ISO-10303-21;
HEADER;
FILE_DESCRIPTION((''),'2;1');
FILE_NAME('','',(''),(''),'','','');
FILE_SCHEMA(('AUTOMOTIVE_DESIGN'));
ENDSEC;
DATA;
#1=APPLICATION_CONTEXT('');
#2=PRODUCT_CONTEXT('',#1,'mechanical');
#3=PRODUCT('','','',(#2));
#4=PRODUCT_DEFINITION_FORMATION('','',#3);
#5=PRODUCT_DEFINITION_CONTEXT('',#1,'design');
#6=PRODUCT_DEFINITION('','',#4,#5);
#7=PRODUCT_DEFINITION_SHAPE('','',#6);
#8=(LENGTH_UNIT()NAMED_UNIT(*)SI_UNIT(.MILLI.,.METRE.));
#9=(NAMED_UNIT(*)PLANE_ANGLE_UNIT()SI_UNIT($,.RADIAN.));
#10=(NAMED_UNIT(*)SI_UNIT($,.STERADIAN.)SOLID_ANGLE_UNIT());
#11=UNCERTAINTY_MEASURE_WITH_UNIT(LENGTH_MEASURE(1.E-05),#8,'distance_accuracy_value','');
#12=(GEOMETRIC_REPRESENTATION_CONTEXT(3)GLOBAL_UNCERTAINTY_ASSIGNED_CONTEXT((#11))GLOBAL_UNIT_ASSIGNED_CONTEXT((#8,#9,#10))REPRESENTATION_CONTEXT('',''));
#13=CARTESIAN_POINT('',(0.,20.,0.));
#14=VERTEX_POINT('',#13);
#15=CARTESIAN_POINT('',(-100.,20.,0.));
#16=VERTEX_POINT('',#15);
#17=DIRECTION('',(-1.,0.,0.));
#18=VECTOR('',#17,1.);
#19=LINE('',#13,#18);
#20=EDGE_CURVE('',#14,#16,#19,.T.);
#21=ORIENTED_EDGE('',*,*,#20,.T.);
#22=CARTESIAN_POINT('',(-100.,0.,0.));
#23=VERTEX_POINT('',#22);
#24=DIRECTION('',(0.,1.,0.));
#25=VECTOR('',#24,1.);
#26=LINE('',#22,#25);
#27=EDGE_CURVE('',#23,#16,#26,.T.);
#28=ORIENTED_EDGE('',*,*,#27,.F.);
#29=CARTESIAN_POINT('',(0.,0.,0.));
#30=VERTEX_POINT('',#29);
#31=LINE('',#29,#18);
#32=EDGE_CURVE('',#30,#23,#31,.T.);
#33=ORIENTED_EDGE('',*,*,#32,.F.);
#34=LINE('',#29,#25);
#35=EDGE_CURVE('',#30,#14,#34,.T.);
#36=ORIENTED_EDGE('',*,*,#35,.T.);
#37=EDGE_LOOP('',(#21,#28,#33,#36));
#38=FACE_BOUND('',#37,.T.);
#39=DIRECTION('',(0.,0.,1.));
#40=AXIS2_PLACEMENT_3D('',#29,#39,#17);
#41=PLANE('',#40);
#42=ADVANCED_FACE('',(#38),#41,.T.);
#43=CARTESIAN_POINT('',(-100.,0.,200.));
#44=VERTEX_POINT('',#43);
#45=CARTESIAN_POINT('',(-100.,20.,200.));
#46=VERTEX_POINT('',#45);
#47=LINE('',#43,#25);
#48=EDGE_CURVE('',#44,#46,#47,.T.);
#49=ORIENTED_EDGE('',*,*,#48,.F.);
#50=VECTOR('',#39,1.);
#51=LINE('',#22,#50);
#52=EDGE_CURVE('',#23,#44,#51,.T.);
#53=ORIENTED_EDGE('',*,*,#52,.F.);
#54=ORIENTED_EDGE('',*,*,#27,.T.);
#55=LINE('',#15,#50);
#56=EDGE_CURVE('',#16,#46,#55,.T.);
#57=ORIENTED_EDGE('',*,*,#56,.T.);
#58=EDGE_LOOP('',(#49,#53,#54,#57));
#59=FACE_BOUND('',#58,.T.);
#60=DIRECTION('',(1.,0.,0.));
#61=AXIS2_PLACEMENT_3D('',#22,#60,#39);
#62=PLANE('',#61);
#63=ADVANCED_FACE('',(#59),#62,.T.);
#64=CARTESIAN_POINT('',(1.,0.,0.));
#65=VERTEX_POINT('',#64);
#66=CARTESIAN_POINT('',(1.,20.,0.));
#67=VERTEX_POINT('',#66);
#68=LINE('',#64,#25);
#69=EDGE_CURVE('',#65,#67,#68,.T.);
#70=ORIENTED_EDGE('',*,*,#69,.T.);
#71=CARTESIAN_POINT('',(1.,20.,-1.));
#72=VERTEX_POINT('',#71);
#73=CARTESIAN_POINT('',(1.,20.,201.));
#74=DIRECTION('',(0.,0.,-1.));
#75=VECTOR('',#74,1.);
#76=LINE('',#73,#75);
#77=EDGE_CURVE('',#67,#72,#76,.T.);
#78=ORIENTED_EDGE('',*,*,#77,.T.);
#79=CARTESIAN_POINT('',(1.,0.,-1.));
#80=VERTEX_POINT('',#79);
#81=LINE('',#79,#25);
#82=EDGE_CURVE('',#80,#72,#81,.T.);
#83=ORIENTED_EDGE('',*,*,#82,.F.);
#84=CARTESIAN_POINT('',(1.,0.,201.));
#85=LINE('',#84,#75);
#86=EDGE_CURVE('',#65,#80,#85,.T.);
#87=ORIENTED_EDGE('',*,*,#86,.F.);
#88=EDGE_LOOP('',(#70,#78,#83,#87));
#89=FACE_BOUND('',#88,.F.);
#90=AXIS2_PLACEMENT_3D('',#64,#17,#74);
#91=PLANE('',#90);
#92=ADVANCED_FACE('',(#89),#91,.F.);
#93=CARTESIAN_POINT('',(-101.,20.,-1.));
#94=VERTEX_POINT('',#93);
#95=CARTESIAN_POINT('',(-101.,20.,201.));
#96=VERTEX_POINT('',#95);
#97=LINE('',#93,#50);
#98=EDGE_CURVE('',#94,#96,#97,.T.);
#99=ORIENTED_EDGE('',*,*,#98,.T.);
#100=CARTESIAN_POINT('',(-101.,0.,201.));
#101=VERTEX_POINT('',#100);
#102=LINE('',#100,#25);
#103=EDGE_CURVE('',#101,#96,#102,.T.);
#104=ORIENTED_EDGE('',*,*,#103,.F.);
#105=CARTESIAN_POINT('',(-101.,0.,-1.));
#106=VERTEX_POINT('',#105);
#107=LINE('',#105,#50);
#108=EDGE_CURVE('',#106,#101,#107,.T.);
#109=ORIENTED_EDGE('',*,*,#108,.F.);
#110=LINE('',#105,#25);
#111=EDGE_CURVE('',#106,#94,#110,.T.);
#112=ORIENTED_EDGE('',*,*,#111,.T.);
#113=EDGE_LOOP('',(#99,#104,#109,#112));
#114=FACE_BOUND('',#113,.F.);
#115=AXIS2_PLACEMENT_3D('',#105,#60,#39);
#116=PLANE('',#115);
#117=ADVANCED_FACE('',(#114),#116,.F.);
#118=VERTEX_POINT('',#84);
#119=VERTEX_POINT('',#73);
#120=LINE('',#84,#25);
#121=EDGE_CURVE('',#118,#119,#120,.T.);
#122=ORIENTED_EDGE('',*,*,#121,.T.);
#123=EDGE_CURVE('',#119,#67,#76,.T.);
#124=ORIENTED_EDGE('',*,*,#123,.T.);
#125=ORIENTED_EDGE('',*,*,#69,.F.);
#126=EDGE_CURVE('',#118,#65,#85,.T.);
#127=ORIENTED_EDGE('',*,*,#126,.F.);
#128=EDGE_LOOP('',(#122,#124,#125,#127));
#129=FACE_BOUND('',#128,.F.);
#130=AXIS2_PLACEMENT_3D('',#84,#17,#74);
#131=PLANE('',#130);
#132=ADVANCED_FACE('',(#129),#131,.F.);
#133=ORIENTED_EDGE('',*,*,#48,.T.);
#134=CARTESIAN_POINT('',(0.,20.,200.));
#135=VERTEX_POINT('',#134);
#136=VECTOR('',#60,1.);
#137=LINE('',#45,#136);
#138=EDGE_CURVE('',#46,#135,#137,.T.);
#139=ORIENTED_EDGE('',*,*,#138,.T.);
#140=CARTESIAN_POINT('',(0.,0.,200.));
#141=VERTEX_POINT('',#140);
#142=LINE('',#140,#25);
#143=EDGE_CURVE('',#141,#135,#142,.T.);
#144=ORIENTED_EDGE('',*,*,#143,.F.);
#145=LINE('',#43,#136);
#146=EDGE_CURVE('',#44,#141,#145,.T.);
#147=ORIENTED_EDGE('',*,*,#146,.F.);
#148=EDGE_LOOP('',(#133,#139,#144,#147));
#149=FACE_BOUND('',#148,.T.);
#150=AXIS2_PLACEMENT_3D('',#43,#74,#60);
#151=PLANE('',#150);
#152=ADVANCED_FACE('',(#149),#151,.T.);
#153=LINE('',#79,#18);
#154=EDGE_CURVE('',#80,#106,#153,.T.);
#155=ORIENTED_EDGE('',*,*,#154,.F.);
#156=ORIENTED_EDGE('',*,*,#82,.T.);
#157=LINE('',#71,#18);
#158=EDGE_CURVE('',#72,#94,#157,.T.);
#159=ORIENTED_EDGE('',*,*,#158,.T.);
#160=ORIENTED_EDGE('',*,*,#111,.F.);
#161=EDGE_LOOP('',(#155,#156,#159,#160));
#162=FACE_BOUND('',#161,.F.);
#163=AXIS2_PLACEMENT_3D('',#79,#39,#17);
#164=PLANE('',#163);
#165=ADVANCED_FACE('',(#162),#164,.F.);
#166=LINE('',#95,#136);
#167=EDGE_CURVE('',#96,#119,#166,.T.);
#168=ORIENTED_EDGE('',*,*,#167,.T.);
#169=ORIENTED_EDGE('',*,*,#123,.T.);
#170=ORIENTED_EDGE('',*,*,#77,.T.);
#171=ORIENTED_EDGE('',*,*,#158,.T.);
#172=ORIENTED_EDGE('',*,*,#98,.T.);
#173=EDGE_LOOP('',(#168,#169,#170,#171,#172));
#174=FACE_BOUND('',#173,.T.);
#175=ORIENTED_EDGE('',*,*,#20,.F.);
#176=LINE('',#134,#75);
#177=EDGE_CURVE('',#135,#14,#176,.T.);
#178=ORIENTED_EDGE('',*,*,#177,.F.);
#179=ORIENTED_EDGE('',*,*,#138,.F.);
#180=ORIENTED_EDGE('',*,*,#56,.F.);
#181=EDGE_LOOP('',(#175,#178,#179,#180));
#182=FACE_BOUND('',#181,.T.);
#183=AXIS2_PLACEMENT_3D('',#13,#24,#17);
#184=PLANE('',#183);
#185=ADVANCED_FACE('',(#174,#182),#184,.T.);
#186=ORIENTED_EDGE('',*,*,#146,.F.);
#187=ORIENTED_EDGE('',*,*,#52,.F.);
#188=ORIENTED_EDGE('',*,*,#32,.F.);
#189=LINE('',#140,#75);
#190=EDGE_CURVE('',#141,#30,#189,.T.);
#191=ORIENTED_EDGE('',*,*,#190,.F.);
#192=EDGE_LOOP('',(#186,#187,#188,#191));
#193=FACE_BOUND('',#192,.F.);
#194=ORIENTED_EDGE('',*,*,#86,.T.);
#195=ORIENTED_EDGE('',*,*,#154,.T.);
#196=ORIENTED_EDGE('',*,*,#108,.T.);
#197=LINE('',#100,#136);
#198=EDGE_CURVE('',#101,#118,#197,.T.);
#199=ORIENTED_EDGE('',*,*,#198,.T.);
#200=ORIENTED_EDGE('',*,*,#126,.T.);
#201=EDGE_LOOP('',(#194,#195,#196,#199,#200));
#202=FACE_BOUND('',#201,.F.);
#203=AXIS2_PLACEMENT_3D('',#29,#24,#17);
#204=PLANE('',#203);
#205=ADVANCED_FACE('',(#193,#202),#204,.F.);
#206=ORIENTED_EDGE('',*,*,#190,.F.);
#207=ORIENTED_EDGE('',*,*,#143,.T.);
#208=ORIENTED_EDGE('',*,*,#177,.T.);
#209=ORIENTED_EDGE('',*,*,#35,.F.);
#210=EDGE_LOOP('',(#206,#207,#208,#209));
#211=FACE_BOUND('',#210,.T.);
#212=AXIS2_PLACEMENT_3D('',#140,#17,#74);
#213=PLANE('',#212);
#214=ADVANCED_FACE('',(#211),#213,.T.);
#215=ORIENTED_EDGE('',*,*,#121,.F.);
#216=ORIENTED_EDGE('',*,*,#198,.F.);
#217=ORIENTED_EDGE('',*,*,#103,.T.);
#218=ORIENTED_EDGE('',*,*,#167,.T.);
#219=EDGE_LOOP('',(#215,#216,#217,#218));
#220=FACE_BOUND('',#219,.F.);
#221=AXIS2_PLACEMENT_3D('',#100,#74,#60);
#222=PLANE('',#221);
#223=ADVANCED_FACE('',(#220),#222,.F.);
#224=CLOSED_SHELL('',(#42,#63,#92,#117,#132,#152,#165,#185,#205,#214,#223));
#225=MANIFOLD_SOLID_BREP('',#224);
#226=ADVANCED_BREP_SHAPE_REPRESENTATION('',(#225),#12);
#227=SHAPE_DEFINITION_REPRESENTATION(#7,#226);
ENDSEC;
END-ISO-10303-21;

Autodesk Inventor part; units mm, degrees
ref_plane "YZ Plane" through (0, 0, 0) normal (1, 0, 0) x (0, 1, 0)
ref_plane "XZ Plane" through (0, 0, 0) normal (0, 1, 0) x (-1, 0, 0)
ref_plane "XY Plane" through (0, 0, 0) normal (0, 0, 1) x (1, 0, 0)
sketch "Sketch2" plane through (0, 0, 0) normal (0, 1, 0) x (-1, 0, 0)
  line L0 (0, 0) -> (-20, 0) projected
  line L1 (0, 0) -> (100, 0)
  line L2 (100, 0) -> (100, 200)
  line L3 (100, 200) -> (0, 200)
  line L4 (0, 200) -> (0, 0)
  line L5 (101, 201) -> (-1, 201)
  line L6 (-1, 201) -> (-1, -1)
  line L7 (-1, -1) -> (101, -1)
  line L8 (101, -1) -> (101, 201)
  dimension "d8" = 100
  dimension "d9" = 200
  dimension "d10" = 1
  dimension "d11" = 1
  dimension "d12" = 1
  dimension "d13" = 1
extrude "Extrusion2" add sketch "Sketch2" along normal blind 20
equation "\"d8\" = inner_width"
equation "\"d9\" = height"
equation "\"d10\" = wall_thicknes"
equation "\"d11\" = wall_thicknes"
equation "\"d12\" = wall_thicknes"
equation "\"d13\" = wall_thicknes"
equation "\"inner_width\" = 100"
equation "\"height\" = 200"
equation "\"wall_thicknes\" = 1"
properties part number "vib_bed_full_xz"
